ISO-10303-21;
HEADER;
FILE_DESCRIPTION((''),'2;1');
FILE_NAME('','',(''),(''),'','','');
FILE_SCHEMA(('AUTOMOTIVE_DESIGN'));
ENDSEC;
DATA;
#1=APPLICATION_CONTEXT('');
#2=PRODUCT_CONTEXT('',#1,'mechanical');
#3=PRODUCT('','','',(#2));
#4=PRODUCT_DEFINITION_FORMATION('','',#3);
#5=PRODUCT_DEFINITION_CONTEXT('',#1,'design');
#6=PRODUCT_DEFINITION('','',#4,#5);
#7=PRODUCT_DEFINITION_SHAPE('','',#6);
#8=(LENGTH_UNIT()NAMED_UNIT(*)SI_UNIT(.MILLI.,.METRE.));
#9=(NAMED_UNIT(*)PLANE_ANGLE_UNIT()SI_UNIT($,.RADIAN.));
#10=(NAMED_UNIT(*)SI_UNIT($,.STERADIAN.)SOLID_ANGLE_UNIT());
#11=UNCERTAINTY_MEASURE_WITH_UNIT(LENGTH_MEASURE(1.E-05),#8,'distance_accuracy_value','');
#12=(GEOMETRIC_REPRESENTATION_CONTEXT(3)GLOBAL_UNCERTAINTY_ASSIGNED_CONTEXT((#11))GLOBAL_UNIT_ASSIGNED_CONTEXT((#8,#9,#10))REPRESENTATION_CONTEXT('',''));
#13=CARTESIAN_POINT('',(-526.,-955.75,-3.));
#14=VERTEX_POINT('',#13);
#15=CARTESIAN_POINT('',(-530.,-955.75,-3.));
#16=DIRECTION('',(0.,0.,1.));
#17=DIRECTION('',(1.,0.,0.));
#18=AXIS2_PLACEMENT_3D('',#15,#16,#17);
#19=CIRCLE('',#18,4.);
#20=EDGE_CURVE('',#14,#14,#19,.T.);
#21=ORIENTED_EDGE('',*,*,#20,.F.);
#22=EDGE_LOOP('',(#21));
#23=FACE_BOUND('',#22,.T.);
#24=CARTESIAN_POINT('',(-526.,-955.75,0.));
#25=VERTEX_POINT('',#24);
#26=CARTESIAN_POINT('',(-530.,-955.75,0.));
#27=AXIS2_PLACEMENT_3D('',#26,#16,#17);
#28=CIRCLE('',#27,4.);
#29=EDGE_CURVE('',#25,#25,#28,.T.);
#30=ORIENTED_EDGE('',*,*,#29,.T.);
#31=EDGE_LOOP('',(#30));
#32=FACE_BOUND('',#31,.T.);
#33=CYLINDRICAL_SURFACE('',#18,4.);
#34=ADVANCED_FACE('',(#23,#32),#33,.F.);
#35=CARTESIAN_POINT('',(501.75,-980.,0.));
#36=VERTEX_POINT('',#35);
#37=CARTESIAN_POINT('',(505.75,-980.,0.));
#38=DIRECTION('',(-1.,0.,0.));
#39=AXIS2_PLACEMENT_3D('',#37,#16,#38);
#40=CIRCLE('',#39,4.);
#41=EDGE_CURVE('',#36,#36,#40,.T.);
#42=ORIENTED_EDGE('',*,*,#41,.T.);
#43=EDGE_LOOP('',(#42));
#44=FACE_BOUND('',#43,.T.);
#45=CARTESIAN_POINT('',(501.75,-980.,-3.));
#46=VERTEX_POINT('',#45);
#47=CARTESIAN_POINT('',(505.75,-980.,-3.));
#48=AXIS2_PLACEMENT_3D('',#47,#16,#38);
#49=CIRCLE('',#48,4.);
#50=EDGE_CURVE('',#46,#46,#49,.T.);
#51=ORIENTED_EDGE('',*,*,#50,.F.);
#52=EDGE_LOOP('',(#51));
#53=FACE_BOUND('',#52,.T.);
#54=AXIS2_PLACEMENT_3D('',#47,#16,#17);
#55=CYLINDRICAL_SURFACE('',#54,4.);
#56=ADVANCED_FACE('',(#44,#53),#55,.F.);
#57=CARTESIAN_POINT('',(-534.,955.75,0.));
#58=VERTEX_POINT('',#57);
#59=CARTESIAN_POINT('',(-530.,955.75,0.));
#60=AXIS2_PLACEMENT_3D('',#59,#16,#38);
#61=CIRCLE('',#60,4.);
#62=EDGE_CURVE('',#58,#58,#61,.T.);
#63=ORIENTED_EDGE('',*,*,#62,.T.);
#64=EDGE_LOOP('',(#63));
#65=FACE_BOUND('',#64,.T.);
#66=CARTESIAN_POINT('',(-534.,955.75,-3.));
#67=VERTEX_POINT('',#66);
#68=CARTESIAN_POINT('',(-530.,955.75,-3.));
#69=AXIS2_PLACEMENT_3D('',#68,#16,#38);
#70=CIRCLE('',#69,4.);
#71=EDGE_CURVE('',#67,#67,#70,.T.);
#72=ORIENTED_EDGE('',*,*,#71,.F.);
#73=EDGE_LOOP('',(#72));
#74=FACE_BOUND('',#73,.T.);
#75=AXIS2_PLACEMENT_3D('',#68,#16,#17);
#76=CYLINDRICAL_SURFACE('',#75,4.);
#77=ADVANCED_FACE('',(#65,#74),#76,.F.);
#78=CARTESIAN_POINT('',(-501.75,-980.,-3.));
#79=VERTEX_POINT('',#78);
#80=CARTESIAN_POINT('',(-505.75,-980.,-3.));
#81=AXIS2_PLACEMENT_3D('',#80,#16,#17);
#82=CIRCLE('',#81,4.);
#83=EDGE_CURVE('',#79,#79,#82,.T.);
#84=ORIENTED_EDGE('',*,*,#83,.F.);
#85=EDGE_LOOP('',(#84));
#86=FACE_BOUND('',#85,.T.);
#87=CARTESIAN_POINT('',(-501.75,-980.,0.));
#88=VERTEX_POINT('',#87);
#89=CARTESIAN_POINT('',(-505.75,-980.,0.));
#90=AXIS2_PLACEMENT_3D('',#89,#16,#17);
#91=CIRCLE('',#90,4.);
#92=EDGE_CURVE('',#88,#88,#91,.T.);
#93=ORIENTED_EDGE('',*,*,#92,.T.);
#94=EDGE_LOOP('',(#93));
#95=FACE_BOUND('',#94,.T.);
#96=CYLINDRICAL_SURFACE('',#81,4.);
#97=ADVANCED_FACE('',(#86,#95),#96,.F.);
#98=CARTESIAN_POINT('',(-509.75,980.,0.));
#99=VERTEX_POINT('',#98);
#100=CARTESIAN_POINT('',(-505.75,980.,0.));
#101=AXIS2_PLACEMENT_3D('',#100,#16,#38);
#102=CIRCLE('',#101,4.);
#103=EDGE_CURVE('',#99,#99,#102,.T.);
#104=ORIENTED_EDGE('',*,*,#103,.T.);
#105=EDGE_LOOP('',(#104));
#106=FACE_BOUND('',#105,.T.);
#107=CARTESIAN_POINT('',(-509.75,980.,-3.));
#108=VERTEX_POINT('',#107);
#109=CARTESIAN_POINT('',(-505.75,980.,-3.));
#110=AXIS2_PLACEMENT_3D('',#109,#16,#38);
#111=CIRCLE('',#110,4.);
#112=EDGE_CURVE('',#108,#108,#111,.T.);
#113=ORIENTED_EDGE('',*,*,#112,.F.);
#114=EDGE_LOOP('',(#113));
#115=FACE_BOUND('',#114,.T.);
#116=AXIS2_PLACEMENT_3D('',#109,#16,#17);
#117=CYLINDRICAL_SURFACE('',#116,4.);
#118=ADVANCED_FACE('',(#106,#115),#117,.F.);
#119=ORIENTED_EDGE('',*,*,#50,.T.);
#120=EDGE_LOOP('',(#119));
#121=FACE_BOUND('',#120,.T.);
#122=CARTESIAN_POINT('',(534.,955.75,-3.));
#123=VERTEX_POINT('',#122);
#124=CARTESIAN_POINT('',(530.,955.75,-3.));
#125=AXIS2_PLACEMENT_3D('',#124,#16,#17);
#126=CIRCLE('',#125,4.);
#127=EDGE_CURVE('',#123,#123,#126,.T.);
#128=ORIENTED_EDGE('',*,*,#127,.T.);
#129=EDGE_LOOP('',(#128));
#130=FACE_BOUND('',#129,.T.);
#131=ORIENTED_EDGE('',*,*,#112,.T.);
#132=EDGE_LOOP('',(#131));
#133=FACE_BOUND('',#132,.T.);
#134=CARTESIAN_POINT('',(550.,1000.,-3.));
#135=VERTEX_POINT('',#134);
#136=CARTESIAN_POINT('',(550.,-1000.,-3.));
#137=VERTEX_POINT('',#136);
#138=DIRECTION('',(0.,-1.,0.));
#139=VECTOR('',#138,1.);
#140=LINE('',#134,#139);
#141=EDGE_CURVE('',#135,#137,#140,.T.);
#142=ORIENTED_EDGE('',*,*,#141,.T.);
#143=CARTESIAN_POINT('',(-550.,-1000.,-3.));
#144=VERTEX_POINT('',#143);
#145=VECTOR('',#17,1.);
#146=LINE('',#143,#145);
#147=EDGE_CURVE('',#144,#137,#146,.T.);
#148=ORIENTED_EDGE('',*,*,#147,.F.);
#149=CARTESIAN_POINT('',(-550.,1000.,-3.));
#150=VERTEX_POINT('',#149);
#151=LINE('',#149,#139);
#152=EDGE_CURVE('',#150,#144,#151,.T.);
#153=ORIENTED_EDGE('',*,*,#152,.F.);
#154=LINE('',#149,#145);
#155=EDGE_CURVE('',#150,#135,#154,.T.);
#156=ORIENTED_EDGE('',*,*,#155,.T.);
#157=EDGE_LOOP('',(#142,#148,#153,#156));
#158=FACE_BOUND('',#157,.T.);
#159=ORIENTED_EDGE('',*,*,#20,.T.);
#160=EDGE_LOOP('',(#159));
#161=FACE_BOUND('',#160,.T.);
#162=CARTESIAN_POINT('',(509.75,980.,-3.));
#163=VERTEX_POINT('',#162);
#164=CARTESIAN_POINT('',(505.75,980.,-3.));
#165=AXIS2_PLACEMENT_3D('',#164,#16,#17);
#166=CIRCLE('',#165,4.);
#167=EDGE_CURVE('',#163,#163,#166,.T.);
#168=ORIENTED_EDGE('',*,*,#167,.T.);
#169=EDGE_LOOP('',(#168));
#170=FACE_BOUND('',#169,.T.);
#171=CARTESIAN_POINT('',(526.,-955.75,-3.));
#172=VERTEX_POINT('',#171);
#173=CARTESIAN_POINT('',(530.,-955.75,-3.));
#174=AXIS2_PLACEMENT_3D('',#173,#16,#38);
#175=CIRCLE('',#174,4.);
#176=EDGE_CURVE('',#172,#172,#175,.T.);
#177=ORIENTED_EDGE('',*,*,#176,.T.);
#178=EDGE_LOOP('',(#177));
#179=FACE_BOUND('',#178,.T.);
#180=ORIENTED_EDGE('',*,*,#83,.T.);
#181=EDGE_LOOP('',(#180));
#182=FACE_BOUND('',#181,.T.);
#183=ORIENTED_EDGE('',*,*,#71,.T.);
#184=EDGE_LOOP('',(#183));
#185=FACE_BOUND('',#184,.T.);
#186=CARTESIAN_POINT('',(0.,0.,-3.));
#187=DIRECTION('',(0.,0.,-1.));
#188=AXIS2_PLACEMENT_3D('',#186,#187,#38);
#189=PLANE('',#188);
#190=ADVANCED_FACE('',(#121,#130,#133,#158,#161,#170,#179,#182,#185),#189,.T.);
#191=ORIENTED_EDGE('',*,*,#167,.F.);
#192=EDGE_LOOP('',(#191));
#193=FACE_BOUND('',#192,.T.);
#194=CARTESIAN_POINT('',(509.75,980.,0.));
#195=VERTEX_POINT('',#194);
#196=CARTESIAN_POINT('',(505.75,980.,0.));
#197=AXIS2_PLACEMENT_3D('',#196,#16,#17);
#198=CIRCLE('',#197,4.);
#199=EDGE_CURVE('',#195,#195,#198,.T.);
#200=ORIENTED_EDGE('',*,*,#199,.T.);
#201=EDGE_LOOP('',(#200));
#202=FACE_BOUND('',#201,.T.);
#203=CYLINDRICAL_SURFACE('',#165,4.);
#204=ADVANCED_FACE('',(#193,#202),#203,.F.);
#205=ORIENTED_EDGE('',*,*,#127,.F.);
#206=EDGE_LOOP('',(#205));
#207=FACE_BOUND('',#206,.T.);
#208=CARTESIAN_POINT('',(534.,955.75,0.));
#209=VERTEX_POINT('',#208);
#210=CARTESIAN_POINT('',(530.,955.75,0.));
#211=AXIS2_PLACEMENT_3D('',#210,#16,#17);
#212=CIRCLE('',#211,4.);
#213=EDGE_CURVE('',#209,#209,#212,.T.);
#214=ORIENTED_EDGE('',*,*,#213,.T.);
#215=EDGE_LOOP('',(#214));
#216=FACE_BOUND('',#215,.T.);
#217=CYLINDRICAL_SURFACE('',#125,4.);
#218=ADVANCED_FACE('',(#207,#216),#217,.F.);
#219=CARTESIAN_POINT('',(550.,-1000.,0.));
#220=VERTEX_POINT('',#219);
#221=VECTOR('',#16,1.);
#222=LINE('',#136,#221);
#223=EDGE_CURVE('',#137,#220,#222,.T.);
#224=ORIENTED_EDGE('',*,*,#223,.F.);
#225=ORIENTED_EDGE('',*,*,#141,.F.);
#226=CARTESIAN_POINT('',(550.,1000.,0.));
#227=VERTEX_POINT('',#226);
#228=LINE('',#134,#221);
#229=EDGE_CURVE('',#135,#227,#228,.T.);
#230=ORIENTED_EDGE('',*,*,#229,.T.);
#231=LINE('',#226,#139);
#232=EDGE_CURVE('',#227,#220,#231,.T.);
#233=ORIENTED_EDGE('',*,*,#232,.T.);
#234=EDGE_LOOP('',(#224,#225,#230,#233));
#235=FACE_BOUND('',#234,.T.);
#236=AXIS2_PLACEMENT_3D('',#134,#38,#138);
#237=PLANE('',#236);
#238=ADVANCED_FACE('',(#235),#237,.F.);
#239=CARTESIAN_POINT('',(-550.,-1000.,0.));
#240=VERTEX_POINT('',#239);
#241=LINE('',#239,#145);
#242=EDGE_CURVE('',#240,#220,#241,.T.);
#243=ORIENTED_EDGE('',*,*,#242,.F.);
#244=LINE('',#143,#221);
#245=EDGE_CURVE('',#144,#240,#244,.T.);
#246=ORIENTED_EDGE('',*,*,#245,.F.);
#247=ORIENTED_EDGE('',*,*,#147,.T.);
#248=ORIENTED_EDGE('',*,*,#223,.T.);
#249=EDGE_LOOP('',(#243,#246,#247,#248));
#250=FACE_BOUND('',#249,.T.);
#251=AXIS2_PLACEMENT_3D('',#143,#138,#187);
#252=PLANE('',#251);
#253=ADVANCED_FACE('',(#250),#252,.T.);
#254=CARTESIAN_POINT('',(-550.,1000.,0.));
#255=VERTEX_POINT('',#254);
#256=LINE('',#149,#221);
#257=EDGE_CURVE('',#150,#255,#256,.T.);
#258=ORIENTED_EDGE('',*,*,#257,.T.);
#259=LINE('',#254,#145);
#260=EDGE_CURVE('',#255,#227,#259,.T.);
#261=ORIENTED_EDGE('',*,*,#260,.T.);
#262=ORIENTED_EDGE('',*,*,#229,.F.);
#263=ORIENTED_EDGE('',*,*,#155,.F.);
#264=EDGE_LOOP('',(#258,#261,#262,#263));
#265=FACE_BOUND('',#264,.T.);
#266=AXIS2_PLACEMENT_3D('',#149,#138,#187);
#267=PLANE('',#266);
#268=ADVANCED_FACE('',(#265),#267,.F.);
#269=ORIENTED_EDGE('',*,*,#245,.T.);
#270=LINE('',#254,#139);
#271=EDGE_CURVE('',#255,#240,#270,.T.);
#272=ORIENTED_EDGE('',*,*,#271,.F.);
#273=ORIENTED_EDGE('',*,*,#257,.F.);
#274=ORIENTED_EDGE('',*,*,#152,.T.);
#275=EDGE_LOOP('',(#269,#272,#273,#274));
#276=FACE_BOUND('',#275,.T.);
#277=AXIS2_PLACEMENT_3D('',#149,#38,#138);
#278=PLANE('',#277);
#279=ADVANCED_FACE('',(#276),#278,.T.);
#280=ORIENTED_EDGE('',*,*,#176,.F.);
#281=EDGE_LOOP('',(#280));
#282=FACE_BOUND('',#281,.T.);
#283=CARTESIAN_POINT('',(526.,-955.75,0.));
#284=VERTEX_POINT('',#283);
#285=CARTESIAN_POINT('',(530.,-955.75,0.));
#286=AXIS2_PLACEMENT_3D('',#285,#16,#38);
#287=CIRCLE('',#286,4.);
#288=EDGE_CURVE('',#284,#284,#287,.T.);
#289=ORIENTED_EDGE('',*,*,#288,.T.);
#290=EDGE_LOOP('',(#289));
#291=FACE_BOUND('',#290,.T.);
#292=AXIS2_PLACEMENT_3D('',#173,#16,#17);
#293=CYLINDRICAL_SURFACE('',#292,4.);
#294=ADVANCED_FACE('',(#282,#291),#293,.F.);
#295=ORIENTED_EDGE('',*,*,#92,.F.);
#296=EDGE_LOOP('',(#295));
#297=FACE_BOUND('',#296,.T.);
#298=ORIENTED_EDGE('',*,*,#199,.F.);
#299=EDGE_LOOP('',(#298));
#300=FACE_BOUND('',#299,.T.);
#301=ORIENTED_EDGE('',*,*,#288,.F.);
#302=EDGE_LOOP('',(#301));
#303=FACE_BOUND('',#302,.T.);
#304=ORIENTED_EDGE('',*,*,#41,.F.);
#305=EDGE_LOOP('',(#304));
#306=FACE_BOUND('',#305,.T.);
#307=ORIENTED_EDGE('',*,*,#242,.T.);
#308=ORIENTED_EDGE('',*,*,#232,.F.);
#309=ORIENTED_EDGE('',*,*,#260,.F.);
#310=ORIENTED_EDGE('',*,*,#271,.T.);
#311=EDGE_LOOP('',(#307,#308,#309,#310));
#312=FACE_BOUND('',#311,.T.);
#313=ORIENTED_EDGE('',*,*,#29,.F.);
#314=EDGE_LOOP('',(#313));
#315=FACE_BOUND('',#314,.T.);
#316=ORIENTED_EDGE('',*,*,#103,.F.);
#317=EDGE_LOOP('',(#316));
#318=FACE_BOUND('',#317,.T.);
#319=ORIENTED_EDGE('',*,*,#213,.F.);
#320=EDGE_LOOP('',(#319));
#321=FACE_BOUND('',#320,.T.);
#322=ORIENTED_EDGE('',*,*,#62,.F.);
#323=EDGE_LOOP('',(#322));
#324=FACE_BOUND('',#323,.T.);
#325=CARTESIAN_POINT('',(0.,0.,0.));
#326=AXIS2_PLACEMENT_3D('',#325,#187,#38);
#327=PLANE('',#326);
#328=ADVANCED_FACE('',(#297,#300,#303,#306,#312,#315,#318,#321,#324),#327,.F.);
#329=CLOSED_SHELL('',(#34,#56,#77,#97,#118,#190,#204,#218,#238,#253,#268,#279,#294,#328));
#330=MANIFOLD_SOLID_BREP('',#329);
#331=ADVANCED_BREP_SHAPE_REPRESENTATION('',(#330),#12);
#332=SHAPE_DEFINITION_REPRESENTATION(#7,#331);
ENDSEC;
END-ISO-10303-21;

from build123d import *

# Parameters (mm, degrees)
SCHIZZO1_W               = 1100
SCHIZZO1_H               = 2000
BASE_FLANGIA1_DEPTH      = 3
SCHIZZO2_R               = 4
TAGLIO_ESTRUSIONE1_DEPTH = 1142.275164016


# Sheet-metal steps are written as plain solids
with BuildPart() as part:
    # Schizzo1 → Base-Flangia1 (new body)
    with BuildSketch(Plane.XY):
        Rectangle(SCHIZZO1_W, SCHIZZO1_H)
    extrude(amount=-BASE_FLANGIA1_DEPTH)

    # Schizzo2 → Taglio-Estrusione1 (cut, through all)
    with BuildSketch(Plane.XY):
        with Locations((-530, -955.75)):
            Circle(SCHIZZO2_R)
        with Locations(Location((530, -955.75, 0), (0, 0, 180))):
            Circle(SCHIZZO2_R)
        with Locations(Location((-530, 955.75, 0), (0, 0, 180))):
            Circle(SCHIZZO2_R)
        with Locations((530, 955.75)):
            Circle(SCHIZZO2_R)
        with Locations((-505.75, -980)):
            Circle(SCHIZZO2_R)
        with Locations(Location((505.75, -980, 0), (0, 0, 180))):
            Circle(SCHIZZO2_R)
        with Locations((505.75, 980)):
            Circle(SCHIZZO2_R)
        with Locations(Location((-505.75, 980, 0), (0, 0, 180))):
            Circle(SCHIZZO2_R)
    extrude(amount=-TAGLIO_ESTRUSIONE1_DEPTH, mode=Mode.SUBTRACT)


solid = part.part
